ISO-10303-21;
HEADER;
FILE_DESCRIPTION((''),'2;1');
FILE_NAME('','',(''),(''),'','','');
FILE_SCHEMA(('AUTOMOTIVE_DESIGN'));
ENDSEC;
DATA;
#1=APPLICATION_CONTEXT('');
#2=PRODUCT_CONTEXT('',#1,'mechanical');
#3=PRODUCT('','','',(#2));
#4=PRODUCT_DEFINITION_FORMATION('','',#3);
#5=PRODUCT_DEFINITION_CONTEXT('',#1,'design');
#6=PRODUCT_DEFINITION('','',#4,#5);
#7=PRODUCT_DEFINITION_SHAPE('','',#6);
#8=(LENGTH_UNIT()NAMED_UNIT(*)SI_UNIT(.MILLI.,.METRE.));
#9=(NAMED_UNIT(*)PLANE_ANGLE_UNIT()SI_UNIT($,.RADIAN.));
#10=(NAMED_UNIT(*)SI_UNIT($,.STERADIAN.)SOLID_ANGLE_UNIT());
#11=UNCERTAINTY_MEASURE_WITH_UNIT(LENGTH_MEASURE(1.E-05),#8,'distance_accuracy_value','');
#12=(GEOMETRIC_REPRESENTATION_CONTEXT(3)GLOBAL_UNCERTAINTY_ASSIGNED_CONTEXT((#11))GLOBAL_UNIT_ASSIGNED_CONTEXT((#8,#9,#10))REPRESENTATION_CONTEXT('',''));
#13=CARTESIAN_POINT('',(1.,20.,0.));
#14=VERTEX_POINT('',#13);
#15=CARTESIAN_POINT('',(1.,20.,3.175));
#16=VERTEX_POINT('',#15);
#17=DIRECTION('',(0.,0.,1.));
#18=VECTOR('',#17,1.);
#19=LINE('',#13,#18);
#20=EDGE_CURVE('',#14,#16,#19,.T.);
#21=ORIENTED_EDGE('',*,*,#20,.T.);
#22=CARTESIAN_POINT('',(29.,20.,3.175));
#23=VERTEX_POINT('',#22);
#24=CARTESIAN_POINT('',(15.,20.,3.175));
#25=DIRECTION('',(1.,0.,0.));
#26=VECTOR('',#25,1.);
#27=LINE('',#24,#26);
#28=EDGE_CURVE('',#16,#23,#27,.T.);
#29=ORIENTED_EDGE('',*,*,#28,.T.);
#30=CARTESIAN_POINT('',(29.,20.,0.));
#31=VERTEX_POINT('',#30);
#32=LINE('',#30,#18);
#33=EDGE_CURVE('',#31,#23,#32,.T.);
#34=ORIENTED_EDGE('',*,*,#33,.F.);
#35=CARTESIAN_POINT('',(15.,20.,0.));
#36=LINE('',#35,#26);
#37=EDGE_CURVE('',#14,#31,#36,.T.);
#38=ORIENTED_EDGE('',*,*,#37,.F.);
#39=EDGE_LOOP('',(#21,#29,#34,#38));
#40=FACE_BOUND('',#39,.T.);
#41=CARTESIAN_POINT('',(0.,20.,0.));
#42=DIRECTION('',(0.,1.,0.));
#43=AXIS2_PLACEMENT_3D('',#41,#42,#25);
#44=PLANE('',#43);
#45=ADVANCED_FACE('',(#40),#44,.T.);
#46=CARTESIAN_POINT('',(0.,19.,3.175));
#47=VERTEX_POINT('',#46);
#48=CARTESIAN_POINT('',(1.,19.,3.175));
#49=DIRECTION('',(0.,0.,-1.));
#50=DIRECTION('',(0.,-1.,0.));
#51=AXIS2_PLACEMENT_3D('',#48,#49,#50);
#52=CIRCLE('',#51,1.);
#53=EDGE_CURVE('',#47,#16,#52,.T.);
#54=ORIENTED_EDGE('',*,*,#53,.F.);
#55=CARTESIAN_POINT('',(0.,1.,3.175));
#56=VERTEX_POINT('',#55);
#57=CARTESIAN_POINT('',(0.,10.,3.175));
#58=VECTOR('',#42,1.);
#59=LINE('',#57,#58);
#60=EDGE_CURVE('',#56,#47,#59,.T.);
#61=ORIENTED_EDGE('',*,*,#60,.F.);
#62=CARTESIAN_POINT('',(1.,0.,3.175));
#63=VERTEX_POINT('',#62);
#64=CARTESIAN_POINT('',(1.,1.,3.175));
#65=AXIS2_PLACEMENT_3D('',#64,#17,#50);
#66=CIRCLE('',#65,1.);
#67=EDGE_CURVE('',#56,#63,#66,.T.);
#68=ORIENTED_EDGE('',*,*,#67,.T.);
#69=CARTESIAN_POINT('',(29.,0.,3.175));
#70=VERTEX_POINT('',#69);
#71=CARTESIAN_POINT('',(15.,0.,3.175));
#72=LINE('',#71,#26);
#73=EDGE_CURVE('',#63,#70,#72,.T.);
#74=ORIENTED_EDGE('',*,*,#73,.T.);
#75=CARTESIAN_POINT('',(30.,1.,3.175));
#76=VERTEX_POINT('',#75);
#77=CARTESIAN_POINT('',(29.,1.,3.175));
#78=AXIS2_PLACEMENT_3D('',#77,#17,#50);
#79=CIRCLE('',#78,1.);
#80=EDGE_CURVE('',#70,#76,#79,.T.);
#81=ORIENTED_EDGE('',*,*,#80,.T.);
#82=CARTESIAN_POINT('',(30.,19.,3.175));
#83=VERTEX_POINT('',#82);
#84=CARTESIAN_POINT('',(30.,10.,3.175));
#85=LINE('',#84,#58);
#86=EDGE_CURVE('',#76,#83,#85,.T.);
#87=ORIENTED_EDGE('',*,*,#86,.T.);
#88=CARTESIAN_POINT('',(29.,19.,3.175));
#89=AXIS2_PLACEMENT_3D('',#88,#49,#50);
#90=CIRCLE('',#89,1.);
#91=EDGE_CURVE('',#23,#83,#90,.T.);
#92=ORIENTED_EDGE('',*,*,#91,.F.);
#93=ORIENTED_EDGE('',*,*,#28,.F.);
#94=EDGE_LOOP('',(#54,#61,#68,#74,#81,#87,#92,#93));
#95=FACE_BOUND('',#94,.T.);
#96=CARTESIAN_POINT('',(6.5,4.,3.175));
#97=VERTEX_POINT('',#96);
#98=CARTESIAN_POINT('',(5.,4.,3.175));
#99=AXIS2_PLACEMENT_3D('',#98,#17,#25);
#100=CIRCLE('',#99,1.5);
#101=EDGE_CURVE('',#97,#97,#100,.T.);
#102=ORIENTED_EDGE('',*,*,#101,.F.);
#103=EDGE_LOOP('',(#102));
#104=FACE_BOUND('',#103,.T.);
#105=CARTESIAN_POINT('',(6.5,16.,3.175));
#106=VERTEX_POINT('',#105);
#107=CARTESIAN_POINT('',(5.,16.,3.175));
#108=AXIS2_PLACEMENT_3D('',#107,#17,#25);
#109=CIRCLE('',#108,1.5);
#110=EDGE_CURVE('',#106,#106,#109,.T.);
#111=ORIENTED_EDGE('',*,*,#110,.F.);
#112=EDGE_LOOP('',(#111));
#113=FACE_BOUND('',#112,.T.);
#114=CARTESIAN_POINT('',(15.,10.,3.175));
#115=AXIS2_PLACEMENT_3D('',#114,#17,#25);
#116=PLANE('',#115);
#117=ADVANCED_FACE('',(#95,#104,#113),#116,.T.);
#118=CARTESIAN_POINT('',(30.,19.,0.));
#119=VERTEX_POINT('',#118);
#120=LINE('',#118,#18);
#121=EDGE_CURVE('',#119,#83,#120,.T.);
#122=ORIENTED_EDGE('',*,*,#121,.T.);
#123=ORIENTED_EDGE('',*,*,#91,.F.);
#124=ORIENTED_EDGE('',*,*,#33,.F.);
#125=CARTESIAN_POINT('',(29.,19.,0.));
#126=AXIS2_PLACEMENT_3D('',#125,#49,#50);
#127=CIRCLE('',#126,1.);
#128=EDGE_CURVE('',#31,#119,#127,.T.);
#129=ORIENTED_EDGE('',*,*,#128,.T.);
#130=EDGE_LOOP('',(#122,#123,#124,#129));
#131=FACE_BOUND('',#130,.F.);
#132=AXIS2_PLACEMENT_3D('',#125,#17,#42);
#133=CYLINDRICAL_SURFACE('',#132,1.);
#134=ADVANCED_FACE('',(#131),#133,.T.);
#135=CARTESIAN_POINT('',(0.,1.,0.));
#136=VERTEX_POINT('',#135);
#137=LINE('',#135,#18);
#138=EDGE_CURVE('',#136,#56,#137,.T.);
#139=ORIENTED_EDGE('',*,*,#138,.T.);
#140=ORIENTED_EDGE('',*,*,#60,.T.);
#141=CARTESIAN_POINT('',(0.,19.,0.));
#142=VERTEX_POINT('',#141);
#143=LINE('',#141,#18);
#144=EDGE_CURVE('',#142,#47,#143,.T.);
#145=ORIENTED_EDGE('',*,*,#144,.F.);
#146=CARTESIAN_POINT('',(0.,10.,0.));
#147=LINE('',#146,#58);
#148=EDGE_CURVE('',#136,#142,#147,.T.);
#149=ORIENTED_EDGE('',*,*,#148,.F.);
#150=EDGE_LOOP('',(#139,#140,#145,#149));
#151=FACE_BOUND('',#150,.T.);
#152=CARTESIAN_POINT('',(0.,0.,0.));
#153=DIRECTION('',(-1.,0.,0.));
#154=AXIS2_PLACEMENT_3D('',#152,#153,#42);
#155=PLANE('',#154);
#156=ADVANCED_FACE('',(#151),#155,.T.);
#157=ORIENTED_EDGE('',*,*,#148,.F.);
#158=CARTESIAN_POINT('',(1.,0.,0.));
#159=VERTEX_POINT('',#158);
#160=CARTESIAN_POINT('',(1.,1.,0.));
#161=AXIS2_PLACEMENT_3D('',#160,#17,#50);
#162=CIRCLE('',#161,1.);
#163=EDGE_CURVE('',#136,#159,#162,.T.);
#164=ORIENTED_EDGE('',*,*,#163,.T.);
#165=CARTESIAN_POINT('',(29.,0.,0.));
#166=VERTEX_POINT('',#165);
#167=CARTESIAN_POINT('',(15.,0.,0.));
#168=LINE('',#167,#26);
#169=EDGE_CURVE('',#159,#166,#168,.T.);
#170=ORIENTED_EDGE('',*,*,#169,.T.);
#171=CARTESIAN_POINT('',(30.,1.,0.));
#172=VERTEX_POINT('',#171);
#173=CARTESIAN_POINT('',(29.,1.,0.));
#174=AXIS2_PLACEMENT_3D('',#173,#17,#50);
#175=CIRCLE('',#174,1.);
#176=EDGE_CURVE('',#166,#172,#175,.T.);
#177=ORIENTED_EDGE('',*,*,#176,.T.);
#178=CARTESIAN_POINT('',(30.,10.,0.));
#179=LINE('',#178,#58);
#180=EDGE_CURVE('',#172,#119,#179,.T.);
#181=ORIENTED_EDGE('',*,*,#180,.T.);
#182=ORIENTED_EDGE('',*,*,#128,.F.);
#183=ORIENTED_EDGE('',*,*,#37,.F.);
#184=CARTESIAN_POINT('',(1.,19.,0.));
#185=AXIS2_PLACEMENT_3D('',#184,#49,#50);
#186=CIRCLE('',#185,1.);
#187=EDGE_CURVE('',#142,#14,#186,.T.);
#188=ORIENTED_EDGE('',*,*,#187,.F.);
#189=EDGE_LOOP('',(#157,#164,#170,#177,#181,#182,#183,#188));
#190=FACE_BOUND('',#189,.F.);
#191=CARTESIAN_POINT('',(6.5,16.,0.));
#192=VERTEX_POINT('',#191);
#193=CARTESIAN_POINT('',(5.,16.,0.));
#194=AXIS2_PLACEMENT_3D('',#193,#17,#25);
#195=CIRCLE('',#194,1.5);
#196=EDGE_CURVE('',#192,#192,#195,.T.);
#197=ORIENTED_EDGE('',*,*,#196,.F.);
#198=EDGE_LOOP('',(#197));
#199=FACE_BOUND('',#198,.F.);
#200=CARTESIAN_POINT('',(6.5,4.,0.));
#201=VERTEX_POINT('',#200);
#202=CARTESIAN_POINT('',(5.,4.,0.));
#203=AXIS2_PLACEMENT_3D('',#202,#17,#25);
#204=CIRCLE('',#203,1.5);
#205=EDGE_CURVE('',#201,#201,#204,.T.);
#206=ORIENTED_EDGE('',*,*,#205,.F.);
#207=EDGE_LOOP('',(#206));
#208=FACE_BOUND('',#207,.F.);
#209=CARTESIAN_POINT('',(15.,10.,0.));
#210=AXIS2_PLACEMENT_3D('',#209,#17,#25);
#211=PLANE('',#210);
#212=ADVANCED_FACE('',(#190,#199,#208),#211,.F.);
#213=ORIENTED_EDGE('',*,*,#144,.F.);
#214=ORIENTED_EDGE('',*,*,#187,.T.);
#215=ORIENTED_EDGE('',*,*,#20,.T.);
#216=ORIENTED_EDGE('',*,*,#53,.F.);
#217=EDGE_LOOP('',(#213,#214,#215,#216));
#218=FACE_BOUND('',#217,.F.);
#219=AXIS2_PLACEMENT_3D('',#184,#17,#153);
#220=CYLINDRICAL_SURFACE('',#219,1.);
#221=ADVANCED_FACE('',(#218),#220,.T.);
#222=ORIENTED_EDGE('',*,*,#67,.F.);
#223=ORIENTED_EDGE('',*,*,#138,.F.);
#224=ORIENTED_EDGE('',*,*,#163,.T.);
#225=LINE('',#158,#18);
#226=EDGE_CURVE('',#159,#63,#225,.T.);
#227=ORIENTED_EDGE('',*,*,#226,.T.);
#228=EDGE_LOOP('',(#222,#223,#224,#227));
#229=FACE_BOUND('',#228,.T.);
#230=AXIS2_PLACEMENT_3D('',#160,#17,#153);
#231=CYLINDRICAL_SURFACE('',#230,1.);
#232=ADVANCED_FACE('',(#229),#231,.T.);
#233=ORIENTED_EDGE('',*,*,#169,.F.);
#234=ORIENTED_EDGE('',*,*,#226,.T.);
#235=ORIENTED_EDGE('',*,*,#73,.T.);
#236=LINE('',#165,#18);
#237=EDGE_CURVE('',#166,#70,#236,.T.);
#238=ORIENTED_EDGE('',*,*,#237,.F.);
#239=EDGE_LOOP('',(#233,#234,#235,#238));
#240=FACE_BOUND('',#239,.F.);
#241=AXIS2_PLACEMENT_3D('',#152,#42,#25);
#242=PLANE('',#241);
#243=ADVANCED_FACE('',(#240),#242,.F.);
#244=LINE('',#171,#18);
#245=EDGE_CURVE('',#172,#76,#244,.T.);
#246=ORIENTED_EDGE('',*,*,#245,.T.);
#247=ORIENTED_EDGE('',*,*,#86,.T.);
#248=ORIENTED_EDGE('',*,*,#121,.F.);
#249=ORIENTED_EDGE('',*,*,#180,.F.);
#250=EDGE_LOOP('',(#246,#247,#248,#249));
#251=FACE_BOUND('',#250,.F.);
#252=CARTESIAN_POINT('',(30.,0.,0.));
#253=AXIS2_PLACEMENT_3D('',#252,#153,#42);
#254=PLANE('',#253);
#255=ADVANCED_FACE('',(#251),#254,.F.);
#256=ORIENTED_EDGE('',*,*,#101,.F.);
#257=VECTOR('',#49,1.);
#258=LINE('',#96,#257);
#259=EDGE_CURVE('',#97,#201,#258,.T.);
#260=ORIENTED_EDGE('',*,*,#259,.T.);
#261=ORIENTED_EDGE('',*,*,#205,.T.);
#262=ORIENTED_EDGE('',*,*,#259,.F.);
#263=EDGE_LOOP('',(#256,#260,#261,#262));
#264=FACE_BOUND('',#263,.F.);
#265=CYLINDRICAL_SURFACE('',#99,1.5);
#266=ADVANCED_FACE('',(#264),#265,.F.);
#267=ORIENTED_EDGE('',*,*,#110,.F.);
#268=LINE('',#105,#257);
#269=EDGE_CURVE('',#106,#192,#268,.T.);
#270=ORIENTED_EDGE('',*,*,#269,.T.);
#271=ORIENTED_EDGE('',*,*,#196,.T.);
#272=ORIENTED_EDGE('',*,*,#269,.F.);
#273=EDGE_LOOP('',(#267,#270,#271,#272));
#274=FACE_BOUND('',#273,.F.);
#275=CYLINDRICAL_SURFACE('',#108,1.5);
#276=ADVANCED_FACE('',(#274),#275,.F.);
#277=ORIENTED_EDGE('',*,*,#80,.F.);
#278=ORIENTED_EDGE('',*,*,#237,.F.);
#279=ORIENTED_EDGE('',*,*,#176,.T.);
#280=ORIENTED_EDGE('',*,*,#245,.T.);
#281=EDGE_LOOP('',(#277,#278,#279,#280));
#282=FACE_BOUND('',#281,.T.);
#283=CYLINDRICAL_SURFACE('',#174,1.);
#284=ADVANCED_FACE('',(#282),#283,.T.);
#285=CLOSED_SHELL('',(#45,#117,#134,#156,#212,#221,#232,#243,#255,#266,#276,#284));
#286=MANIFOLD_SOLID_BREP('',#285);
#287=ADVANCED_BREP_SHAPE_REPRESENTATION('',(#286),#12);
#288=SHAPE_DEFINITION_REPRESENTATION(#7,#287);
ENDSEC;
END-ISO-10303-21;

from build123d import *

# Parameters (mm, degrees)
F0_W     = 30
F0_H     = 20
F1_DEPTH = 3.175
F2_R     = 1.5
F3_DEPTH = 25
F4_R     = 1


# Not quite as in the source:
# - a length typed as a fraction of an inch, garbled in the dataset ("3 / 203.2 mm" for 3/8 in), is restored


with BuildPart() as f1:
    # F0 (on Top) → F1 (new body)
    with BuildSketch(Plane.XY):
        with Locations((15, 10)):
            Rectangle(F0_W, F0_H)
    extrude(amount=F1_DEPTH)

    # F2 (on face) → F3 (cut)
    with BuildSketch(Plane.XY.offset(3.175)):
        with Locations((5, 16)):
            Circle(F2_R)
        with Locations((5, 4)):
            Circle(F2_R)
    extrude(amount=-F3_DEPTH, mode=Mode.SUBTRACT)

    # F4
    f4_edges = [f1.edges().sort_by_distance(p)[0] for p in [
        (0, 20, 1.5875),
        (30, 20, 1.5875),
        (30, 0, 1.5875),
        (0, 0, 1.5875),
    ]]
    fillet(f4_edges, radius=F4_R)


solid = f1.part
